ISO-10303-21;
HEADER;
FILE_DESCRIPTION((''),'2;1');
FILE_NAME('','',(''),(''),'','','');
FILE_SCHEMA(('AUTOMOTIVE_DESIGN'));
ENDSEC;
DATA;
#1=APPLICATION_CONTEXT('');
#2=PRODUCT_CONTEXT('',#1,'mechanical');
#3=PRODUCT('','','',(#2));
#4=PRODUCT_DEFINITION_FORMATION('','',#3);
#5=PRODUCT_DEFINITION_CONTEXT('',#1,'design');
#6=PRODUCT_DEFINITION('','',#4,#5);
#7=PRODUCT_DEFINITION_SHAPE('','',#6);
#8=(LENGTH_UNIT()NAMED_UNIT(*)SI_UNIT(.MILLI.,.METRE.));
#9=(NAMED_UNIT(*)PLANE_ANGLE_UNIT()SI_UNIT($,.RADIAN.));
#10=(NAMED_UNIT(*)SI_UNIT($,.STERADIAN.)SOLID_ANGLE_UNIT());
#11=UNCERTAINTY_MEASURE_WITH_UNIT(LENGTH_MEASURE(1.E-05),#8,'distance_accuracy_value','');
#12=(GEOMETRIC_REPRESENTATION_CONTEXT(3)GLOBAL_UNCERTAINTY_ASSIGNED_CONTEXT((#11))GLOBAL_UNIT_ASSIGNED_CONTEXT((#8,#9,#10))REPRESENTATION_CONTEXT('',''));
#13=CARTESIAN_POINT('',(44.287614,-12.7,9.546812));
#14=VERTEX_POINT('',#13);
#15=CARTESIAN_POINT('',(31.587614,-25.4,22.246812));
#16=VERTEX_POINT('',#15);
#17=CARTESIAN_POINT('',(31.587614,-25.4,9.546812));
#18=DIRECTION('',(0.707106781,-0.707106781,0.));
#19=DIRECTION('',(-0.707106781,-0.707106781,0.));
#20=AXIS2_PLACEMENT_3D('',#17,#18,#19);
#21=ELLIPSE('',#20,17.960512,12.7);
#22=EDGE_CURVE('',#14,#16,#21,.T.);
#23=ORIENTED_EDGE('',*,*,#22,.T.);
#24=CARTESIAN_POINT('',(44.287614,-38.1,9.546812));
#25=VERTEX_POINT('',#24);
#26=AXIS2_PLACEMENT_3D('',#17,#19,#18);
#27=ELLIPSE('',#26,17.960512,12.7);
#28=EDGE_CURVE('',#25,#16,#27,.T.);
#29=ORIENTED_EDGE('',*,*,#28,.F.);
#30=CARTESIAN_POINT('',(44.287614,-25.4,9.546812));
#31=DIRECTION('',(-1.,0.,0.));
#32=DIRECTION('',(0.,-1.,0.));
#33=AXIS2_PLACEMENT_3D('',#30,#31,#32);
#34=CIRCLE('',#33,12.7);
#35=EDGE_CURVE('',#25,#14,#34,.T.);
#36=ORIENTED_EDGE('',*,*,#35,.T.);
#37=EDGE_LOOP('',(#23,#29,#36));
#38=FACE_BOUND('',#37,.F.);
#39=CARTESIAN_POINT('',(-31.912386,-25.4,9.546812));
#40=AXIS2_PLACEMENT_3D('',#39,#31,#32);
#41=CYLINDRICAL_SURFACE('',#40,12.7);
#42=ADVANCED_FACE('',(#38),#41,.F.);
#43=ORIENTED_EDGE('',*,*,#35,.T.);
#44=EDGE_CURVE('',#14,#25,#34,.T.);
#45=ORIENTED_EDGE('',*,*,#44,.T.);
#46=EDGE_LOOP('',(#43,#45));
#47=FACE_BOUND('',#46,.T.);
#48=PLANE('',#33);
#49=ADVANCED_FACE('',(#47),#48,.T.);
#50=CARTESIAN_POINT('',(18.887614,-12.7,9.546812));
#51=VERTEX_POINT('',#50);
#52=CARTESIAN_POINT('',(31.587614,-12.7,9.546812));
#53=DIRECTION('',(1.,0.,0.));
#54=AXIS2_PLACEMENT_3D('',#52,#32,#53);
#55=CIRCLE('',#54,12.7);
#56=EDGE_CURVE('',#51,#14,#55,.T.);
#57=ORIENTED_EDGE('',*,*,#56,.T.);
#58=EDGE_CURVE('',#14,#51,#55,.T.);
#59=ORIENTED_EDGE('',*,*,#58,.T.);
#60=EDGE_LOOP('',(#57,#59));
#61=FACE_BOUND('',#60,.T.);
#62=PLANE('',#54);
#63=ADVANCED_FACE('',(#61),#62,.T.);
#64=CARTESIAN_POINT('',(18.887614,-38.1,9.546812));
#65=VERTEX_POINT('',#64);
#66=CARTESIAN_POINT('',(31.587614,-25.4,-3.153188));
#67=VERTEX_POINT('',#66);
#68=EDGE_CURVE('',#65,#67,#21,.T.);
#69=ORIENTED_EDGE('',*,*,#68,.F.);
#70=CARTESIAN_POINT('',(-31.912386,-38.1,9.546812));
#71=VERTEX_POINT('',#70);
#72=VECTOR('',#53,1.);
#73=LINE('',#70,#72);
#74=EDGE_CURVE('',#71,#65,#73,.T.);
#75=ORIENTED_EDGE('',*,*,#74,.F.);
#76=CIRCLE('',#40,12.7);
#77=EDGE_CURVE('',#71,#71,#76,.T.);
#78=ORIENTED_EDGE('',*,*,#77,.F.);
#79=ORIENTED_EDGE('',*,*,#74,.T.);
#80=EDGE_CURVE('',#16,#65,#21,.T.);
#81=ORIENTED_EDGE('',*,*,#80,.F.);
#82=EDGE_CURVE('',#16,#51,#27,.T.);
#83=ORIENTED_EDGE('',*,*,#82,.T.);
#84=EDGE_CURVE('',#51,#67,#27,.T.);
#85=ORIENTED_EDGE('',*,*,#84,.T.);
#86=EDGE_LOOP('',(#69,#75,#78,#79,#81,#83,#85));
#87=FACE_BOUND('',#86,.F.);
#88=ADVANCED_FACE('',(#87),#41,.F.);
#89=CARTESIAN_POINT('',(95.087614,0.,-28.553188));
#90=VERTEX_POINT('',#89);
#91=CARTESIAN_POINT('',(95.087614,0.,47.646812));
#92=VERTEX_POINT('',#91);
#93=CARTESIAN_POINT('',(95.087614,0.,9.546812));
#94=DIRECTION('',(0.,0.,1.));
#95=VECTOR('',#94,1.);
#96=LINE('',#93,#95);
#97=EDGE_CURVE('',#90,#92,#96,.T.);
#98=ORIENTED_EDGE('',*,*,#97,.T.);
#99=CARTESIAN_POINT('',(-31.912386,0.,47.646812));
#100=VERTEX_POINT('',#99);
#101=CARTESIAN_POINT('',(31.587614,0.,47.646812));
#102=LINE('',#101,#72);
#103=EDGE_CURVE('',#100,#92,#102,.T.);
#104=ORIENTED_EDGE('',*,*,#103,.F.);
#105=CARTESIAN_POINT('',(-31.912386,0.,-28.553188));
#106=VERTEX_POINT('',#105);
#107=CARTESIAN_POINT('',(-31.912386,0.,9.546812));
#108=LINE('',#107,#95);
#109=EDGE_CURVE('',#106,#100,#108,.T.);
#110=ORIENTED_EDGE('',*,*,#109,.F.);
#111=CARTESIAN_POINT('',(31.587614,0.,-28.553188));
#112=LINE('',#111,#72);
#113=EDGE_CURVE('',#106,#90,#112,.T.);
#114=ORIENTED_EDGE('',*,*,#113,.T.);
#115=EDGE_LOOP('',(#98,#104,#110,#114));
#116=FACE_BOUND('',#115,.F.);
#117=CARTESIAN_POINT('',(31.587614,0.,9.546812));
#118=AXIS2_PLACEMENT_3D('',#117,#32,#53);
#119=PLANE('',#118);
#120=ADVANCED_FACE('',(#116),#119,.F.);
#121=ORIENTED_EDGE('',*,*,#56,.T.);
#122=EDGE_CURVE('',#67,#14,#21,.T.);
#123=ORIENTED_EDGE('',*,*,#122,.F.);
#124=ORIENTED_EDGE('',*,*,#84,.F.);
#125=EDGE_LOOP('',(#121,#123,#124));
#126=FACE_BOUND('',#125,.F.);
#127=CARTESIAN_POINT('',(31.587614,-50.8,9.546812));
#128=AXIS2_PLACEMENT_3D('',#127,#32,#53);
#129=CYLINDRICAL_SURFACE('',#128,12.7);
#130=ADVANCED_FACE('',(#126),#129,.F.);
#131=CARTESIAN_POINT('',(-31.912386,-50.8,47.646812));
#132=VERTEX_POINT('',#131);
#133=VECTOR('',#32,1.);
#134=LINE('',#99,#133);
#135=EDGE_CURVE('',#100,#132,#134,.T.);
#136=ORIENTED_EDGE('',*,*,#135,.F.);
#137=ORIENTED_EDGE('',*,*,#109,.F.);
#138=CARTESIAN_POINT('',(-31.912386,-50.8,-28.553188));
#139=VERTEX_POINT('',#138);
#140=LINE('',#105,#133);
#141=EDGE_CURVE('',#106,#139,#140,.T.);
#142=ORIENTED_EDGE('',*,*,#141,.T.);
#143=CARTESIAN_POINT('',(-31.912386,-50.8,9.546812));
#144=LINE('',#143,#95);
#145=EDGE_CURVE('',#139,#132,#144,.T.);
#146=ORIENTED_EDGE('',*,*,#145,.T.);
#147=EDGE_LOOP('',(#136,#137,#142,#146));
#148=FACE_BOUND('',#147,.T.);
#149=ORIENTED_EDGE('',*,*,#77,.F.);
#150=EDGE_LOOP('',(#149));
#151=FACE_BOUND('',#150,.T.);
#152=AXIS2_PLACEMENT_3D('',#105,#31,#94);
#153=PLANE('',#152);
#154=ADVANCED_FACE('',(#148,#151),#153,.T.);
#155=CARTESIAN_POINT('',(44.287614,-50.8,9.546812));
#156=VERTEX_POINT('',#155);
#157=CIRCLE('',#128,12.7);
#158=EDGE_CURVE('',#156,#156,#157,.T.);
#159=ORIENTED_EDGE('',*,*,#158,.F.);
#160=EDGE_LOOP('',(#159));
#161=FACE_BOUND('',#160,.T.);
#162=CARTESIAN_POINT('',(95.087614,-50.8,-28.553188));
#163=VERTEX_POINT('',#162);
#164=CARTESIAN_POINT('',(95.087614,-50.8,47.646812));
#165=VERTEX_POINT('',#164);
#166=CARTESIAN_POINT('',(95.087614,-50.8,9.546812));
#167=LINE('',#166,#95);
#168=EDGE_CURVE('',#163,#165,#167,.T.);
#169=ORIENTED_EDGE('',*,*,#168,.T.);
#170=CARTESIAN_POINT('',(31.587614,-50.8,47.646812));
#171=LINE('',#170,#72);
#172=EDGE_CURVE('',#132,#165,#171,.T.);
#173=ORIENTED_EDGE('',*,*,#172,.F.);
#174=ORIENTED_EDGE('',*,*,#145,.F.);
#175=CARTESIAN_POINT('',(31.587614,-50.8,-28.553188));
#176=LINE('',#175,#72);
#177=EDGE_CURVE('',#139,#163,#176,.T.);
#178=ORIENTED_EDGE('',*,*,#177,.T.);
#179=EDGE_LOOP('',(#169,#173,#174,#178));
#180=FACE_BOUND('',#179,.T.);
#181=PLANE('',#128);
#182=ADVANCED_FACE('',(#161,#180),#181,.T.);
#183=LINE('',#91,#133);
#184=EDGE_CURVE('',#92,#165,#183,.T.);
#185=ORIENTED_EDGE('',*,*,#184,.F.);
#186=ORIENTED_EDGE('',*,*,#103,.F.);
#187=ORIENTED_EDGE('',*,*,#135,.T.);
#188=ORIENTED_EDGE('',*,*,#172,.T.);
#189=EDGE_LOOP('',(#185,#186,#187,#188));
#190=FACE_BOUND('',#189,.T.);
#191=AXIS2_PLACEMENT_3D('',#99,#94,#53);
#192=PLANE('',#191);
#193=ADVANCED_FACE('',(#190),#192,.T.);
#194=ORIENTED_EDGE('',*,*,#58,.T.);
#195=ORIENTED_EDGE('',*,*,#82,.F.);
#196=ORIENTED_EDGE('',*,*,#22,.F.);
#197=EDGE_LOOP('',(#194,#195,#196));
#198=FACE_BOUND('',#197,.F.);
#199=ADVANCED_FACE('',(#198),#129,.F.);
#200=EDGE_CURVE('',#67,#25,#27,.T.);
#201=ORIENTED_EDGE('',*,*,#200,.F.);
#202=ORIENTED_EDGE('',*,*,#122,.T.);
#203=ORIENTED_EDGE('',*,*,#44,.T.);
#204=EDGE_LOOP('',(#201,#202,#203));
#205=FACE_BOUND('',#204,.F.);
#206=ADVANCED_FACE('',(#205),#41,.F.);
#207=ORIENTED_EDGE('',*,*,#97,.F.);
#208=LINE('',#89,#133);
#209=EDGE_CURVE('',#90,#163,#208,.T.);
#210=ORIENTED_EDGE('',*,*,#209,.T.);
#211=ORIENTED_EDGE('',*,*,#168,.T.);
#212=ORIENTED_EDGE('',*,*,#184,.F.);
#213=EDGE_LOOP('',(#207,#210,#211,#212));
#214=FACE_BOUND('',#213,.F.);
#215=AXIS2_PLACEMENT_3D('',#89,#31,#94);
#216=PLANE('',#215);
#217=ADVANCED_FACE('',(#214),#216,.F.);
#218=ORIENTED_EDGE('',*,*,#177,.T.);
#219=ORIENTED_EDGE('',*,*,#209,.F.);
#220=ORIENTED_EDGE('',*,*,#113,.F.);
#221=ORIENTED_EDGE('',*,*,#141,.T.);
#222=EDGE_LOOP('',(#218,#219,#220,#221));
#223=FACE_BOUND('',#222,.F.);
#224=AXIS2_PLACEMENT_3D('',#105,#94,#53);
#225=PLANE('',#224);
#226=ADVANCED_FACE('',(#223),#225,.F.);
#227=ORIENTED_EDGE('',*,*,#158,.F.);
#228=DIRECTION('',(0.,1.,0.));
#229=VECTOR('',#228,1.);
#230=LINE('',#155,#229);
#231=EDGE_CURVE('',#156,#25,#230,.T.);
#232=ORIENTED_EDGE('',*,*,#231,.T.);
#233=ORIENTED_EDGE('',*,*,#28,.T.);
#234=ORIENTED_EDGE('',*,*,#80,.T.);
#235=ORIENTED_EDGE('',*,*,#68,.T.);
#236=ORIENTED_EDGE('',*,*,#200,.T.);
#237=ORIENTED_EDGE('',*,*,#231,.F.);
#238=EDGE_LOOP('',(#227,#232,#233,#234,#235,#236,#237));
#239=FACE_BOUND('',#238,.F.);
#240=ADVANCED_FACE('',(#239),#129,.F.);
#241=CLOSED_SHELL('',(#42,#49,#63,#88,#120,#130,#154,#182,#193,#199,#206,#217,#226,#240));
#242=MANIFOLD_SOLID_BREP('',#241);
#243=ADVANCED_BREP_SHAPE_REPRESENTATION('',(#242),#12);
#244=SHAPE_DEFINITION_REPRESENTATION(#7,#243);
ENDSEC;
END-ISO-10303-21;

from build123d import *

# Parameters (mm, degrees)
F0_W     = 127
F0_H     = 76.2
F1_DEPTH = 50.8
F2_R     = 12.7
F3_DEPTH = 38.1
F4_R     = 12.7
F5_DEPTH = 76.2


# Not quite as in the source:
# - a feature of the source that left no trace in its solid (it failed there, or was rolled back) is left out


with BuildPart() as f1:
    # F0 (on Front) → F1 (new body)
    with BuildSketch(Plane.XZ):
        with Locations((31.5876135826, 9.5468121529)):
            Rectangle(F0_W, F0_H)
    extrude(amount=F1_DEPTH)

    # F2 (on face) → F3 (cut)
    with BuildSketch(Plane.XZ.offset(50.8)):
        with Locations((31.5876135826, 9.5468121529)):
            Circle(F2_R)
    extrude(amount=-F3_DEPTH, mode=Mode.SUBTRACT)

    # F4 (on face) → F5 (cut)
    with BuildSketch(Plane(origin=(-31.9123864174, 0, 0), x_dir=(0, -1, 0), z_dir=(-1, 0, 0))):
        with Locations((25.4, 9.5468121529)):
            Circle(F4_R)
    extrude(amount=-F5_DEPTH, mode=Mode.SUBTRACT)


solid = f1.part
